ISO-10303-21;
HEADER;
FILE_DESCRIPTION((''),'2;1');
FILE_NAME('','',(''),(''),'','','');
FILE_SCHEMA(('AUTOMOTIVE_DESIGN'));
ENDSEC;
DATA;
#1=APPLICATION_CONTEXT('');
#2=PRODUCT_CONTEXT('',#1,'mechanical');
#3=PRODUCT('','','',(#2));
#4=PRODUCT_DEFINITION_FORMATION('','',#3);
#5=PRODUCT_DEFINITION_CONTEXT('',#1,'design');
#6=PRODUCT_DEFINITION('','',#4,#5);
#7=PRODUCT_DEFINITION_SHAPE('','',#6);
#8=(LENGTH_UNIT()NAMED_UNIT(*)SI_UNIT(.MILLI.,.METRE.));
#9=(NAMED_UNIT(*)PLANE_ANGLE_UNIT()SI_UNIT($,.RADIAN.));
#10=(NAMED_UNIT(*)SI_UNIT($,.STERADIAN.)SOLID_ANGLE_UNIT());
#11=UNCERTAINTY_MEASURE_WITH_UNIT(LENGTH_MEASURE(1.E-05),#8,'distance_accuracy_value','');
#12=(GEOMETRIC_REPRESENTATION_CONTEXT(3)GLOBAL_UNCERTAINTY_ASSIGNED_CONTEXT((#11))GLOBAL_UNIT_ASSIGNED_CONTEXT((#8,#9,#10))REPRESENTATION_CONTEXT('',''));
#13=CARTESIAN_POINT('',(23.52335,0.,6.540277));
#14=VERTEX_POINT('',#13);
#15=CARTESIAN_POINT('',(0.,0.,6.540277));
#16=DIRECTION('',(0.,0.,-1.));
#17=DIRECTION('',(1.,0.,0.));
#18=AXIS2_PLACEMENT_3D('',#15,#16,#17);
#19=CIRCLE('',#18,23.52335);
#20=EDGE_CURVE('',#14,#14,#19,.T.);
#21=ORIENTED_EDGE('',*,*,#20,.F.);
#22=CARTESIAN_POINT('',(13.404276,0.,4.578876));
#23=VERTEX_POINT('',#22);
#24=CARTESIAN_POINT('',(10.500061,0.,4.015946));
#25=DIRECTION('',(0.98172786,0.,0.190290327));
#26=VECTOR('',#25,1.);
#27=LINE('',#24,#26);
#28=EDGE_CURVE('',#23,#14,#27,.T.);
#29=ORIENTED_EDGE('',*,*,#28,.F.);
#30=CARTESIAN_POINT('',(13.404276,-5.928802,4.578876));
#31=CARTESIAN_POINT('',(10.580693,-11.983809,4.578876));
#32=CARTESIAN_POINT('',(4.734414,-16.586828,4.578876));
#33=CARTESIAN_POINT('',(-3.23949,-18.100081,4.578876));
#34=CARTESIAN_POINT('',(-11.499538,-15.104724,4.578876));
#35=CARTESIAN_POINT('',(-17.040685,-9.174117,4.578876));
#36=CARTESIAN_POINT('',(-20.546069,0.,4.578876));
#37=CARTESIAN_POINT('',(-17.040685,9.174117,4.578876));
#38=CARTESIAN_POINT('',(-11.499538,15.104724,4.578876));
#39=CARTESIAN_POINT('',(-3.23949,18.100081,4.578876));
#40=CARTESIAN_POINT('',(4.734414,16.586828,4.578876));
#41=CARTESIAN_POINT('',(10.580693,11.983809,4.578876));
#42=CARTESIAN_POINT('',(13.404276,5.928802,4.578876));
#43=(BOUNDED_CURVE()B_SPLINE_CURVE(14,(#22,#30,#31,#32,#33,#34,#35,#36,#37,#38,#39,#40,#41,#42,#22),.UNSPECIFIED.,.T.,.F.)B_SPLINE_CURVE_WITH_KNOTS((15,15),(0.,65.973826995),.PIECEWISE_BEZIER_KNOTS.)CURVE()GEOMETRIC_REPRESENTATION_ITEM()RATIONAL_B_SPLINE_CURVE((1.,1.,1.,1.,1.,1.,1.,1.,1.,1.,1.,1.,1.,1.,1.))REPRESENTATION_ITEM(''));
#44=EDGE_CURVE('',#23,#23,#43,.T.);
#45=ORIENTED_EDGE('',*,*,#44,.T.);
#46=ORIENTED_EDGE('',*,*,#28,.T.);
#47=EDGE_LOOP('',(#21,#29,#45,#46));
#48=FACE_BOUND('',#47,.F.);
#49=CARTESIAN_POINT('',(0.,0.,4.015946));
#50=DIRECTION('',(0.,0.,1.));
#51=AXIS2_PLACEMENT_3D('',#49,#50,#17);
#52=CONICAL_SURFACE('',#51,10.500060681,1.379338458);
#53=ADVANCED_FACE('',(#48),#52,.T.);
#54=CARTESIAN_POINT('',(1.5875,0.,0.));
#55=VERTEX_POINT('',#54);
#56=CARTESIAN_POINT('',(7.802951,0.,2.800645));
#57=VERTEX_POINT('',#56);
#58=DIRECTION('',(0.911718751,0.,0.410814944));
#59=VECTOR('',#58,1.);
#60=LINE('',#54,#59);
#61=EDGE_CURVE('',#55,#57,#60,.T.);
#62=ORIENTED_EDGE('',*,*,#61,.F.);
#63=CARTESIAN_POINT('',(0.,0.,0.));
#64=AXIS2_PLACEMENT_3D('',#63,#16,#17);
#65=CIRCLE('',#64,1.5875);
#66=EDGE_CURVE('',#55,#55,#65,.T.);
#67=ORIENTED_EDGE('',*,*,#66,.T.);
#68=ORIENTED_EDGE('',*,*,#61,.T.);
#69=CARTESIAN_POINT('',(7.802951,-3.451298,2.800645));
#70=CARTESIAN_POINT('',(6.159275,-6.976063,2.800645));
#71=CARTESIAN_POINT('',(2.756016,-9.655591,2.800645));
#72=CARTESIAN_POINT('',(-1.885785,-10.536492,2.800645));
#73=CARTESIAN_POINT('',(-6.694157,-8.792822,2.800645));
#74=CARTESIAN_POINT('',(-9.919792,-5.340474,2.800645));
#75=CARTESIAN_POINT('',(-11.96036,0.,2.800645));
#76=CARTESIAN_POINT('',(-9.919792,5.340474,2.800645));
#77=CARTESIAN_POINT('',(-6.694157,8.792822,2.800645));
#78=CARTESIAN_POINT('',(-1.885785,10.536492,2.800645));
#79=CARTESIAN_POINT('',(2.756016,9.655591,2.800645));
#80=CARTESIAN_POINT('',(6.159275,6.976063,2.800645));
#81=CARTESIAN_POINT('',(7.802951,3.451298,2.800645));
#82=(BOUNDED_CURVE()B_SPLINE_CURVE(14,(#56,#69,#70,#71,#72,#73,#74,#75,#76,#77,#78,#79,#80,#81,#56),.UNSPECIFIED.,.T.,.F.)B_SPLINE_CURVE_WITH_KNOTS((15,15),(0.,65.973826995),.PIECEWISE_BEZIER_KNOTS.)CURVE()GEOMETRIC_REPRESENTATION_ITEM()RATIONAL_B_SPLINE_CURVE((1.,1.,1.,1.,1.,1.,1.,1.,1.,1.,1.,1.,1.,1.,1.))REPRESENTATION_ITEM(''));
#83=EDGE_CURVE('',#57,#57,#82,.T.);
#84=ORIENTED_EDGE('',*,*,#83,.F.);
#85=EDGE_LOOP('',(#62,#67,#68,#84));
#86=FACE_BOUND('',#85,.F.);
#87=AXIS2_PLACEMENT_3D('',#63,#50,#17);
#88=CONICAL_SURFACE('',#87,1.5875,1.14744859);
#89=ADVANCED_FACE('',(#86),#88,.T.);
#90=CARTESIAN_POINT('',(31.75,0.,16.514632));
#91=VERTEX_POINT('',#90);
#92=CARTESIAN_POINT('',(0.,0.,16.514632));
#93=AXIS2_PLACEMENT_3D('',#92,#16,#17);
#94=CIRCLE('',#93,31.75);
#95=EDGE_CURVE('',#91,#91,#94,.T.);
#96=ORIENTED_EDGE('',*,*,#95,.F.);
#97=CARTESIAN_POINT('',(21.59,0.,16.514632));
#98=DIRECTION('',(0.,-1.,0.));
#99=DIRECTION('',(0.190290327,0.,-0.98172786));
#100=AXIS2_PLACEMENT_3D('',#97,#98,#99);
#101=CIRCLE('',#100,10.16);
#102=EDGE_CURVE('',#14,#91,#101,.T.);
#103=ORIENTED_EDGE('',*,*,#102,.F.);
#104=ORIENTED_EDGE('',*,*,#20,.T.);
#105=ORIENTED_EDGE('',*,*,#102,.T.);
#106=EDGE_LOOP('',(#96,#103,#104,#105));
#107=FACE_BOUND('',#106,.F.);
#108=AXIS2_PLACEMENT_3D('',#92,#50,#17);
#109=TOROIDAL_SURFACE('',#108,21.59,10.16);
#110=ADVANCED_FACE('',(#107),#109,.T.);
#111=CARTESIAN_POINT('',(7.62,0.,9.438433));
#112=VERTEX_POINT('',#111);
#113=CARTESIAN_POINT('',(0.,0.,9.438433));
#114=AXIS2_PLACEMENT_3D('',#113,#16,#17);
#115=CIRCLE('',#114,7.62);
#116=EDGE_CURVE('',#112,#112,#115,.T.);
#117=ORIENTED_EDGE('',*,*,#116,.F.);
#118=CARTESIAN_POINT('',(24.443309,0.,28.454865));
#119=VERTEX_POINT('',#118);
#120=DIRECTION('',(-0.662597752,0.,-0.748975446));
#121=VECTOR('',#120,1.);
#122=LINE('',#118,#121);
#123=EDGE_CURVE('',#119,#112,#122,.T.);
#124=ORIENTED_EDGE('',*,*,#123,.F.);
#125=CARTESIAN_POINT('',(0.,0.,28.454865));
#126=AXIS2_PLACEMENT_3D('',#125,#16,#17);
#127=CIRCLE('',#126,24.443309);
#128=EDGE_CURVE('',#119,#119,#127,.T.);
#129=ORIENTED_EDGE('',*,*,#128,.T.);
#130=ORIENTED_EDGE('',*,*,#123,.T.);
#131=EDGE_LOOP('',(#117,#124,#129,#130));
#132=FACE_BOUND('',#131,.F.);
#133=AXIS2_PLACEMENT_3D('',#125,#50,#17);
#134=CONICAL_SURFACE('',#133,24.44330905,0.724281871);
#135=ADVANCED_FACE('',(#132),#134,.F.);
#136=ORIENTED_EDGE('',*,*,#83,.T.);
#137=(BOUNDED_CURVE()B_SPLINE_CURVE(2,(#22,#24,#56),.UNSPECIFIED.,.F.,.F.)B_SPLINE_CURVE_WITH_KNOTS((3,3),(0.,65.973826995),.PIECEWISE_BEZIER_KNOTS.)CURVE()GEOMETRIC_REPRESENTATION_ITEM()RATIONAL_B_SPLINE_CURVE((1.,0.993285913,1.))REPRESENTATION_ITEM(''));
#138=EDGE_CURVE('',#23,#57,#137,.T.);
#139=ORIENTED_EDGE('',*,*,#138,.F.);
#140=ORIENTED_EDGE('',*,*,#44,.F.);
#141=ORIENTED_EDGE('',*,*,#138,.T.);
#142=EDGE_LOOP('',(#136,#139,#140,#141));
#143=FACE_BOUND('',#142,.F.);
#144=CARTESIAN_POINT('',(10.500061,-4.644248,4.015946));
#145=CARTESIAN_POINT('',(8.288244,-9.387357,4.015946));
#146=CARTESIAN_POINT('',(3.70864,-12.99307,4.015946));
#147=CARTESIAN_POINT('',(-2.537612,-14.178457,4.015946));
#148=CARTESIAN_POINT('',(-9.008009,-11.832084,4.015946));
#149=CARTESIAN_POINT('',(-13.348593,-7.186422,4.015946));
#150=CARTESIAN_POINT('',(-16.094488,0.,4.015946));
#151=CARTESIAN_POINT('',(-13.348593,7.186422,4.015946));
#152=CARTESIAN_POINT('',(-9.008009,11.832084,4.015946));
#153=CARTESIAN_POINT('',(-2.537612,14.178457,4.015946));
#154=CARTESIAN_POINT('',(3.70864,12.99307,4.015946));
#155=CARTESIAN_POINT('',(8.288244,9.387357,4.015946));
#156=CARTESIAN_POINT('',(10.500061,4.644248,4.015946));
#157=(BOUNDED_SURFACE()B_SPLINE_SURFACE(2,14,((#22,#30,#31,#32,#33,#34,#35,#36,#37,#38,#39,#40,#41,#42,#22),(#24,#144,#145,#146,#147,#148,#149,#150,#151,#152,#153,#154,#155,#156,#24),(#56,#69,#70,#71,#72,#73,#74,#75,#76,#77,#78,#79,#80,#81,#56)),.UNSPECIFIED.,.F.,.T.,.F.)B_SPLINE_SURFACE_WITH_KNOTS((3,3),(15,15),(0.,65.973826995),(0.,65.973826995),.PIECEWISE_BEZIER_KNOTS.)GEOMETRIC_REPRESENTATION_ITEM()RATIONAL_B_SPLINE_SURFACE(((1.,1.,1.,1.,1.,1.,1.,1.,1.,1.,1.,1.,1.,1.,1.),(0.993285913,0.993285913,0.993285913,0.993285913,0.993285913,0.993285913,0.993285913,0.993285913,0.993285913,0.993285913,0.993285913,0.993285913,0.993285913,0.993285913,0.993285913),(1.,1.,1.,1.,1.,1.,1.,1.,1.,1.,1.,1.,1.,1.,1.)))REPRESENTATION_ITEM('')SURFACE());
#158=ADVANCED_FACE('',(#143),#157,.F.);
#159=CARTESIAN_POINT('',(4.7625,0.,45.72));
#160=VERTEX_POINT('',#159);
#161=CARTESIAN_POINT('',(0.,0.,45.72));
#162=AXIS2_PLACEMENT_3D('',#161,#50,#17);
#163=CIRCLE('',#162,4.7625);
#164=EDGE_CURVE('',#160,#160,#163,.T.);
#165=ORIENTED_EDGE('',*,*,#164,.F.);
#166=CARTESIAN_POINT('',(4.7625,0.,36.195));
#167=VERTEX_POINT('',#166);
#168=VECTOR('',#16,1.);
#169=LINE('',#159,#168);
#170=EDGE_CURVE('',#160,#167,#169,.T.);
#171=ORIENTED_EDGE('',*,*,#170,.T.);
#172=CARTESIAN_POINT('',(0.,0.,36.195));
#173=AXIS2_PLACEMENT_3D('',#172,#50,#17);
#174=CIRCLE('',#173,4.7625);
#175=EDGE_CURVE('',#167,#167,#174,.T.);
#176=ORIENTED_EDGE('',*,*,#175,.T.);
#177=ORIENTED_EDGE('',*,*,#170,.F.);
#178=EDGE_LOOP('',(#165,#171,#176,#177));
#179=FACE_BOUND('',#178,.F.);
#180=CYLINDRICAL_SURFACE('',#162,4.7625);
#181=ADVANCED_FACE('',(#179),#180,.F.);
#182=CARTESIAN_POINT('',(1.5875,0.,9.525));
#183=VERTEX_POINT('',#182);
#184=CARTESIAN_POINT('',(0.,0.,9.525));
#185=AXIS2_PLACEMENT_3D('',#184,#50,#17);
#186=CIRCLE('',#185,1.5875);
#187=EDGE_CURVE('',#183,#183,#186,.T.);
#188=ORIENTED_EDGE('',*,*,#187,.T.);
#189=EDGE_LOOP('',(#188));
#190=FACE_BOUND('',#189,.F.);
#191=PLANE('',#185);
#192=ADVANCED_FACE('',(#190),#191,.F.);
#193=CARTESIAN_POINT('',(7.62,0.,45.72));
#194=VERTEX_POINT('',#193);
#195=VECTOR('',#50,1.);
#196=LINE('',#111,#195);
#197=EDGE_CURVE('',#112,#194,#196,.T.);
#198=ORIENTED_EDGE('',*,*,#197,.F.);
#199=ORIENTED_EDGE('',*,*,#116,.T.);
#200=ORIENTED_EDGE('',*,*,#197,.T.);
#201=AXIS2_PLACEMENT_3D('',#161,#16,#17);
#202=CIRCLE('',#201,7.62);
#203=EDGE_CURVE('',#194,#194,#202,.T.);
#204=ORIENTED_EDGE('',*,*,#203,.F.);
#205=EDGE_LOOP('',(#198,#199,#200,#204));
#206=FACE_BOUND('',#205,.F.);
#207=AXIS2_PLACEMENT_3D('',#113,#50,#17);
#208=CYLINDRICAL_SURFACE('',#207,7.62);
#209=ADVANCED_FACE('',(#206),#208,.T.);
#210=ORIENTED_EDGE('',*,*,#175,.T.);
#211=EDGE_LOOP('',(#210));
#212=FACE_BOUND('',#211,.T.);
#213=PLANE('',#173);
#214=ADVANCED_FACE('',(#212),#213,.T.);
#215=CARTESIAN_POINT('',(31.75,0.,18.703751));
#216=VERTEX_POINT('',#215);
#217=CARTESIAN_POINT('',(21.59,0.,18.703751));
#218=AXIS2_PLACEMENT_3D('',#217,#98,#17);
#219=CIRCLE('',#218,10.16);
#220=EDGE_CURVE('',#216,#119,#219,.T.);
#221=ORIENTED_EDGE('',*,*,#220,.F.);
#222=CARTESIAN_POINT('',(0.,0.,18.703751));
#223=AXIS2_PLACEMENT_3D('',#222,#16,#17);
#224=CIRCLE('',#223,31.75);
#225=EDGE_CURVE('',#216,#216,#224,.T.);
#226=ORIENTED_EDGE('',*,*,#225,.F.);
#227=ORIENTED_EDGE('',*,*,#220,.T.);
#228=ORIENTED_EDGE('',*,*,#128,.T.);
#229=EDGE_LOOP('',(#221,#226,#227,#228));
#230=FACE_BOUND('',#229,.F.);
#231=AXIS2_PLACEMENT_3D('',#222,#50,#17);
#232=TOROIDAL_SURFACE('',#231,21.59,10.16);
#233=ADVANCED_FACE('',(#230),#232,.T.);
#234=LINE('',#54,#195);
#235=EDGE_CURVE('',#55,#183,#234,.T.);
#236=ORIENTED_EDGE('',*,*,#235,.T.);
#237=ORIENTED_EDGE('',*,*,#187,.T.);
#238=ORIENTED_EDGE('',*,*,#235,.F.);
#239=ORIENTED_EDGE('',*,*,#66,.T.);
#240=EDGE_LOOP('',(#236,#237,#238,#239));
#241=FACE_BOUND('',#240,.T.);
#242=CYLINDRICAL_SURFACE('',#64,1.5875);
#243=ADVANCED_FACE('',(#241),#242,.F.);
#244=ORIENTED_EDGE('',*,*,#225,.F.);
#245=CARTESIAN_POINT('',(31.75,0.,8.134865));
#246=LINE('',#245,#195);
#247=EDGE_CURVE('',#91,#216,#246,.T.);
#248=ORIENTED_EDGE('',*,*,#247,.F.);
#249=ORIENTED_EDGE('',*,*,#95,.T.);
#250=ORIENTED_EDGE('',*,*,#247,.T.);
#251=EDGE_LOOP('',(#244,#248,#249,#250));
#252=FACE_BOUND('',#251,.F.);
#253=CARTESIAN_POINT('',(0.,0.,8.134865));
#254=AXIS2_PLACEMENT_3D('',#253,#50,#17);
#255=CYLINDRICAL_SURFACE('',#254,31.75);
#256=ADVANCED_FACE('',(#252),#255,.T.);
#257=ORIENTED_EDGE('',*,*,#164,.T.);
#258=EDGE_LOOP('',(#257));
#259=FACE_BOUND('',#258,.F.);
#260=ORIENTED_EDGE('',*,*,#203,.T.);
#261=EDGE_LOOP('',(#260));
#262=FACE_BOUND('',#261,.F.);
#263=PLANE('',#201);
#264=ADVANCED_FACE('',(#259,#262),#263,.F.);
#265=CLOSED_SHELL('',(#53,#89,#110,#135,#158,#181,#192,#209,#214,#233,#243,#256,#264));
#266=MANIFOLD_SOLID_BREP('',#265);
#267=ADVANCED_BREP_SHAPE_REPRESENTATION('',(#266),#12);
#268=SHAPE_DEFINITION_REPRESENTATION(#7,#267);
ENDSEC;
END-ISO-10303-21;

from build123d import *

# Parameters (mm, degrees)
F3_R     = 25.4
F4_R     = 4.7625
F5_DEPTH = 9.525
F6_R     = 1.5875
F7_DEPTH = 9.525


# Not quite as in the source:
# - a fillet or chamfer that OpenCascade refuses, or shapes differently, is made with other operations: its cross-section is extruded or revolved along the edge and cut away or added


with BuildPart() as f1:
    # F0 (on Front) → F1 (revolve)
    with BuildSketch(Plane.XZ):
        Polygon((10.5000606809, 4.0159458295), (31.75, 8.134865202), (31.75, 28.454865202), (24.4433090497, 28.454865202), (7.62, 9.4384327507), (7.62, 45.72), (0, 45.72), (0, 0), (1.5875, 0), align=None)
    revolve(axis=Axis((0, 0, 22.86), (0, 0, -1)))

    # F2: fillet of radius 10.16 on 3 edges, made by hand

    # F2_s1 → F2_t2 (revolve, cut)
    with BuildSketch(Plane.XZ):
        with BuildLine():
            ThreePointArc((23.5233497224, 6.5402766862), (29.4279982514, 10.0500062027), (31.75, 16.5146317456))
            Line((31.75, 16.5146317456), (31.75, 8.134865202))
            Line((31.75, 8.134865202), (23.5233497224, 6.5402766862))
        make_face()
    revolve(axis=Axis((0, 0, 8.134865202), (0, 0, -1)), mode=Mode.SUBTRACT)

    # F2_s3 → F2_t4 (revolve, cut)
    with BuildSketch(Plane.XZ):
        with BuildLine():
            ThreePointArc((31.75, 18.7037510366), (29.7206586432, 24.7962045676), (24.4433090497, 28.454865202))
            Line((24.4433090497, 28.454865202), (31.75, 28.454865202))
            Line((31.75, 28.454865202), (31.75, 18.7037510366))
        make_face()
    revolve(axis=Axis((0, 0, 28.454865202), (0, 0, -1)), mode=Mode.SUBTRACT)

    # F3
    f3_edges = [f1.edges().sort_by_distance(p)[0] for p in [
        (-10.500061, 0, 4.015946),
    ]]
    fillet(f3_edges, radius=F3_R)

    # F4 (on face) → F5 (cut)
    with BuildSketch(Plane.XY.offset(45.72)):
        Circle(F4_R)
    extrude(amount=-F5_DEPTH, mode=Mode.SUBTRACT)

    # F6 (on Top) → F7 (cut)
    with BuildSketch(Plane.XY):
        Circle(F6_R)
    extrude(amount=F7_DEPTH, mode=Mode.SUBTRACT)


solid = f1.part
